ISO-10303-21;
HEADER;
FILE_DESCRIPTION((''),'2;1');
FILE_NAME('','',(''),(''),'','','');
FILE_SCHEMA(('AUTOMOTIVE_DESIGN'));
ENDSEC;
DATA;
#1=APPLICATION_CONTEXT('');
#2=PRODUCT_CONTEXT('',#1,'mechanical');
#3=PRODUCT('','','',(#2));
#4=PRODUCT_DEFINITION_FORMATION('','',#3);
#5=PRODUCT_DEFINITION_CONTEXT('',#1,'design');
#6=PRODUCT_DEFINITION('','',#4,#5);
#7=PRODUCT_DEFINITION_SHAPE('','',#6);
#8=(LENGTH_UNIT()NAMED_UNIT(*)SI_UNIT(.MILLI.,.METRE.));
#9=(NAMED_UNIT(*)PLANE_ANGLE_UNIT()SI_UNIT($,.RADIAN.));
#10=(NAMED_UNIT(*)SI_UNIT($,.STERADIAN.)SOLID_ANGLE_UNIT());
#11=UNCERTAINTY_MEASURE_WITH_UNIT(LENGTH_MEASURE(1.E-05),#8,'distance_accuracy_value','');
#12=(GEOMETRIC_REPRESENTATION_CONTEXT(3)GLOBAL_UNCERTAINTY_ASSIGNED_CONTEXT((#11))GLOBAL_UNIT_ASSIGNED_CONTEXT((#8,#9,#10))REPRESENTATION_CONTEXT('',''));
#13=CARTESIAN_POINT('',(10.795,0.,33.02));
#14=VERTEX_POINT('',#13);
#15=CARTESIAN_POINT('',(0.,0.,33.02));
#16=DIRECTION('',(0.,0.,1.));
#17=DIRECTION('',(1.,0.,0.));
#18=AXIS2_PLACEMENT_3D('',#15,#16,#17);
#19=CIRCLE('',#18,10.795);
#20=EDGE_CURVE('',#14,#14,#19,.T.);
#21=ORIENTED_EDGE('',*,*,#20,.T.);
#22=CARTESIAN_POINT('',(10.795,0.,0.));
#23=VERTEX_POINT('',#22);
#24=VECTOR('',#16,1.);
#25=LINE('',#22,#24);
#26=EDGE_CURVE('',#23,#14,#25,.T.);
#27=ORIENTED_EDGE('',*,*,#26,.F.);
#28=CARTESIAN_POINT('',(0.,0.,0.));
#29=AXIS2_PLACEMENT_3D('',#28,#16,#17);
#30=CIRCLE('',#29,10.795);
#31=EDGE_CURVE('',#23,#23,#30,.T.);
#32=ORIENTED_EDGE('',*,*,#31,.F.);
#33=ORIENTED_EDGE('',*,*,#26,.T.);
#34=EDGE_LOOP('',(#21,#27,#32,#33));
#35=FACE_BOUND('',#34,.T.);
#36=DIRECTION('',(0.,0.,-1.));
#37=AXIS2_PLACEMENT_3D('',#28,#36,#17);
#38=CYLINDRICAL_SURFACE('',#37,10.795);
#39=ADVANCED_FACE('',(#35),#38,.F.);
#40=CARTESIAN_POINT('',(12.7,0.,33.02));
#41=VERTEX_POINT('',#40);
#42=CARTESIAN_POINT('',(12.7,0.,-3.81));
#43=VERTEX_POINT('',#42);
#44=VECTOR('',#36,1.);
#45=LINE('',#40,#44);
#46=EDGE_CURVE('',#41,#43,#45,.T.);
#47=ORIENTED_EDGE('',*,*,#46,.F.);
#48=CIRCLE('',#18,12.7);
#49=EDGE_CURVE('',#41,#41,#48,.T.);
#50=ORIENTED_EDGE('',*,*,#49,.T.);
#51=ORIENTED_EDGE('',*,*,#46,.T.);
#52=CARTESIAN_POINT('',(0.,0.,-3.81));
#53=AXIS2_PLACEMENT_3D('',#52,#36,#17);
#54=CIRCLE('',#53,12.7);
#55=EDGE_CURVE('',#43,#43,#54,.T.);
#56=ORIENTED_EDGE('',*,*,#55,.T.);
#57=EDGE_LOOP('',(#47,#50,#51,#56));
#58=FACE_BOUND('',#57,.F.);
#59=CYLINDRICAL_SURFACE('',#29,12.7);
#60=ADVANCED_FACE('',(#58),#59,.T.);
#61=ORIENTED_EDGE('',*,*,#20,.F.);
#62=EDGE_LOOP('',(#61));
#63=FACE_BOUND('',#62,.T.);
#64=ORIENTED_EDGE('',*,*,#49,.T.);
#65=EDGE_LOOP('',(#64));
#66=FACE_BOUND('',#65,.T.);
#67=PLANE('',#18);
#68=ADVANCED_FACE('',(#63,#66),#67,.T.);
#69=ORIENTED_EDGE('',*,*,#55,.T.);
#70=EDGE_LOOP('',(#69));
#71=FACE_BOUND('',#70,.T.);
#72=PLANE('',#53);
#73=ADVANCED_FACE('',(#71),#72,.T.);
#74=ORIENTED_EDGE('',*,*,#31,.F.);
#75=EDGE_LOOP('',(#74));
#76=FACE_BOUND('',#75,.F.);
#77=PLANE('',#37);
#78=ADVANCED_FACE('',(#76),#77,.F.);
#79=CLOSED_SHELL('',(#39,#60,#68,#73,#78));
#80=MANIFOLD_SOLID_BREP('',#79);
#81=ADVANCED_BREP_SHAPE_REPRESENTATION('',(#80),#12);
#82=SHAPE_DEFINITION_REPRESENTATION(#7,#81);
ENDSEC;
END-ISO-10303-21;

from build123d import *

# Parameters (mm, degrees)
F0_R     = 12.7
F0_R_2   = 10.795
F1_DEPTH = 33.02
F2_R     = 12.7
F2_R_2   = 10.795
F3_DEPTH = 3.81


with BuildPart() as f1:
    # F0 (on Top) → F1 (new body)
    with BuildSketch(Plane.XY):
        Circle(F0_R)
        Circle(F0_R_2, mode=Mode.SUBTRACT)
    extrude(amount=F1_DEPTH)

    # F2 (on face) → F3 (join)
    with BuildSketch(Plane(origin=(0, 0, 0), x_dir=(1, 0, 0), z_dir=(0, 0, -1))):
        Circle(F2_R)
        Circle(F2_R_2, mode=Mode.SUBTRACT)
        Circle(F2_R_2)
    extrude(amount=F3_DEPTH)


solid = f1.part
